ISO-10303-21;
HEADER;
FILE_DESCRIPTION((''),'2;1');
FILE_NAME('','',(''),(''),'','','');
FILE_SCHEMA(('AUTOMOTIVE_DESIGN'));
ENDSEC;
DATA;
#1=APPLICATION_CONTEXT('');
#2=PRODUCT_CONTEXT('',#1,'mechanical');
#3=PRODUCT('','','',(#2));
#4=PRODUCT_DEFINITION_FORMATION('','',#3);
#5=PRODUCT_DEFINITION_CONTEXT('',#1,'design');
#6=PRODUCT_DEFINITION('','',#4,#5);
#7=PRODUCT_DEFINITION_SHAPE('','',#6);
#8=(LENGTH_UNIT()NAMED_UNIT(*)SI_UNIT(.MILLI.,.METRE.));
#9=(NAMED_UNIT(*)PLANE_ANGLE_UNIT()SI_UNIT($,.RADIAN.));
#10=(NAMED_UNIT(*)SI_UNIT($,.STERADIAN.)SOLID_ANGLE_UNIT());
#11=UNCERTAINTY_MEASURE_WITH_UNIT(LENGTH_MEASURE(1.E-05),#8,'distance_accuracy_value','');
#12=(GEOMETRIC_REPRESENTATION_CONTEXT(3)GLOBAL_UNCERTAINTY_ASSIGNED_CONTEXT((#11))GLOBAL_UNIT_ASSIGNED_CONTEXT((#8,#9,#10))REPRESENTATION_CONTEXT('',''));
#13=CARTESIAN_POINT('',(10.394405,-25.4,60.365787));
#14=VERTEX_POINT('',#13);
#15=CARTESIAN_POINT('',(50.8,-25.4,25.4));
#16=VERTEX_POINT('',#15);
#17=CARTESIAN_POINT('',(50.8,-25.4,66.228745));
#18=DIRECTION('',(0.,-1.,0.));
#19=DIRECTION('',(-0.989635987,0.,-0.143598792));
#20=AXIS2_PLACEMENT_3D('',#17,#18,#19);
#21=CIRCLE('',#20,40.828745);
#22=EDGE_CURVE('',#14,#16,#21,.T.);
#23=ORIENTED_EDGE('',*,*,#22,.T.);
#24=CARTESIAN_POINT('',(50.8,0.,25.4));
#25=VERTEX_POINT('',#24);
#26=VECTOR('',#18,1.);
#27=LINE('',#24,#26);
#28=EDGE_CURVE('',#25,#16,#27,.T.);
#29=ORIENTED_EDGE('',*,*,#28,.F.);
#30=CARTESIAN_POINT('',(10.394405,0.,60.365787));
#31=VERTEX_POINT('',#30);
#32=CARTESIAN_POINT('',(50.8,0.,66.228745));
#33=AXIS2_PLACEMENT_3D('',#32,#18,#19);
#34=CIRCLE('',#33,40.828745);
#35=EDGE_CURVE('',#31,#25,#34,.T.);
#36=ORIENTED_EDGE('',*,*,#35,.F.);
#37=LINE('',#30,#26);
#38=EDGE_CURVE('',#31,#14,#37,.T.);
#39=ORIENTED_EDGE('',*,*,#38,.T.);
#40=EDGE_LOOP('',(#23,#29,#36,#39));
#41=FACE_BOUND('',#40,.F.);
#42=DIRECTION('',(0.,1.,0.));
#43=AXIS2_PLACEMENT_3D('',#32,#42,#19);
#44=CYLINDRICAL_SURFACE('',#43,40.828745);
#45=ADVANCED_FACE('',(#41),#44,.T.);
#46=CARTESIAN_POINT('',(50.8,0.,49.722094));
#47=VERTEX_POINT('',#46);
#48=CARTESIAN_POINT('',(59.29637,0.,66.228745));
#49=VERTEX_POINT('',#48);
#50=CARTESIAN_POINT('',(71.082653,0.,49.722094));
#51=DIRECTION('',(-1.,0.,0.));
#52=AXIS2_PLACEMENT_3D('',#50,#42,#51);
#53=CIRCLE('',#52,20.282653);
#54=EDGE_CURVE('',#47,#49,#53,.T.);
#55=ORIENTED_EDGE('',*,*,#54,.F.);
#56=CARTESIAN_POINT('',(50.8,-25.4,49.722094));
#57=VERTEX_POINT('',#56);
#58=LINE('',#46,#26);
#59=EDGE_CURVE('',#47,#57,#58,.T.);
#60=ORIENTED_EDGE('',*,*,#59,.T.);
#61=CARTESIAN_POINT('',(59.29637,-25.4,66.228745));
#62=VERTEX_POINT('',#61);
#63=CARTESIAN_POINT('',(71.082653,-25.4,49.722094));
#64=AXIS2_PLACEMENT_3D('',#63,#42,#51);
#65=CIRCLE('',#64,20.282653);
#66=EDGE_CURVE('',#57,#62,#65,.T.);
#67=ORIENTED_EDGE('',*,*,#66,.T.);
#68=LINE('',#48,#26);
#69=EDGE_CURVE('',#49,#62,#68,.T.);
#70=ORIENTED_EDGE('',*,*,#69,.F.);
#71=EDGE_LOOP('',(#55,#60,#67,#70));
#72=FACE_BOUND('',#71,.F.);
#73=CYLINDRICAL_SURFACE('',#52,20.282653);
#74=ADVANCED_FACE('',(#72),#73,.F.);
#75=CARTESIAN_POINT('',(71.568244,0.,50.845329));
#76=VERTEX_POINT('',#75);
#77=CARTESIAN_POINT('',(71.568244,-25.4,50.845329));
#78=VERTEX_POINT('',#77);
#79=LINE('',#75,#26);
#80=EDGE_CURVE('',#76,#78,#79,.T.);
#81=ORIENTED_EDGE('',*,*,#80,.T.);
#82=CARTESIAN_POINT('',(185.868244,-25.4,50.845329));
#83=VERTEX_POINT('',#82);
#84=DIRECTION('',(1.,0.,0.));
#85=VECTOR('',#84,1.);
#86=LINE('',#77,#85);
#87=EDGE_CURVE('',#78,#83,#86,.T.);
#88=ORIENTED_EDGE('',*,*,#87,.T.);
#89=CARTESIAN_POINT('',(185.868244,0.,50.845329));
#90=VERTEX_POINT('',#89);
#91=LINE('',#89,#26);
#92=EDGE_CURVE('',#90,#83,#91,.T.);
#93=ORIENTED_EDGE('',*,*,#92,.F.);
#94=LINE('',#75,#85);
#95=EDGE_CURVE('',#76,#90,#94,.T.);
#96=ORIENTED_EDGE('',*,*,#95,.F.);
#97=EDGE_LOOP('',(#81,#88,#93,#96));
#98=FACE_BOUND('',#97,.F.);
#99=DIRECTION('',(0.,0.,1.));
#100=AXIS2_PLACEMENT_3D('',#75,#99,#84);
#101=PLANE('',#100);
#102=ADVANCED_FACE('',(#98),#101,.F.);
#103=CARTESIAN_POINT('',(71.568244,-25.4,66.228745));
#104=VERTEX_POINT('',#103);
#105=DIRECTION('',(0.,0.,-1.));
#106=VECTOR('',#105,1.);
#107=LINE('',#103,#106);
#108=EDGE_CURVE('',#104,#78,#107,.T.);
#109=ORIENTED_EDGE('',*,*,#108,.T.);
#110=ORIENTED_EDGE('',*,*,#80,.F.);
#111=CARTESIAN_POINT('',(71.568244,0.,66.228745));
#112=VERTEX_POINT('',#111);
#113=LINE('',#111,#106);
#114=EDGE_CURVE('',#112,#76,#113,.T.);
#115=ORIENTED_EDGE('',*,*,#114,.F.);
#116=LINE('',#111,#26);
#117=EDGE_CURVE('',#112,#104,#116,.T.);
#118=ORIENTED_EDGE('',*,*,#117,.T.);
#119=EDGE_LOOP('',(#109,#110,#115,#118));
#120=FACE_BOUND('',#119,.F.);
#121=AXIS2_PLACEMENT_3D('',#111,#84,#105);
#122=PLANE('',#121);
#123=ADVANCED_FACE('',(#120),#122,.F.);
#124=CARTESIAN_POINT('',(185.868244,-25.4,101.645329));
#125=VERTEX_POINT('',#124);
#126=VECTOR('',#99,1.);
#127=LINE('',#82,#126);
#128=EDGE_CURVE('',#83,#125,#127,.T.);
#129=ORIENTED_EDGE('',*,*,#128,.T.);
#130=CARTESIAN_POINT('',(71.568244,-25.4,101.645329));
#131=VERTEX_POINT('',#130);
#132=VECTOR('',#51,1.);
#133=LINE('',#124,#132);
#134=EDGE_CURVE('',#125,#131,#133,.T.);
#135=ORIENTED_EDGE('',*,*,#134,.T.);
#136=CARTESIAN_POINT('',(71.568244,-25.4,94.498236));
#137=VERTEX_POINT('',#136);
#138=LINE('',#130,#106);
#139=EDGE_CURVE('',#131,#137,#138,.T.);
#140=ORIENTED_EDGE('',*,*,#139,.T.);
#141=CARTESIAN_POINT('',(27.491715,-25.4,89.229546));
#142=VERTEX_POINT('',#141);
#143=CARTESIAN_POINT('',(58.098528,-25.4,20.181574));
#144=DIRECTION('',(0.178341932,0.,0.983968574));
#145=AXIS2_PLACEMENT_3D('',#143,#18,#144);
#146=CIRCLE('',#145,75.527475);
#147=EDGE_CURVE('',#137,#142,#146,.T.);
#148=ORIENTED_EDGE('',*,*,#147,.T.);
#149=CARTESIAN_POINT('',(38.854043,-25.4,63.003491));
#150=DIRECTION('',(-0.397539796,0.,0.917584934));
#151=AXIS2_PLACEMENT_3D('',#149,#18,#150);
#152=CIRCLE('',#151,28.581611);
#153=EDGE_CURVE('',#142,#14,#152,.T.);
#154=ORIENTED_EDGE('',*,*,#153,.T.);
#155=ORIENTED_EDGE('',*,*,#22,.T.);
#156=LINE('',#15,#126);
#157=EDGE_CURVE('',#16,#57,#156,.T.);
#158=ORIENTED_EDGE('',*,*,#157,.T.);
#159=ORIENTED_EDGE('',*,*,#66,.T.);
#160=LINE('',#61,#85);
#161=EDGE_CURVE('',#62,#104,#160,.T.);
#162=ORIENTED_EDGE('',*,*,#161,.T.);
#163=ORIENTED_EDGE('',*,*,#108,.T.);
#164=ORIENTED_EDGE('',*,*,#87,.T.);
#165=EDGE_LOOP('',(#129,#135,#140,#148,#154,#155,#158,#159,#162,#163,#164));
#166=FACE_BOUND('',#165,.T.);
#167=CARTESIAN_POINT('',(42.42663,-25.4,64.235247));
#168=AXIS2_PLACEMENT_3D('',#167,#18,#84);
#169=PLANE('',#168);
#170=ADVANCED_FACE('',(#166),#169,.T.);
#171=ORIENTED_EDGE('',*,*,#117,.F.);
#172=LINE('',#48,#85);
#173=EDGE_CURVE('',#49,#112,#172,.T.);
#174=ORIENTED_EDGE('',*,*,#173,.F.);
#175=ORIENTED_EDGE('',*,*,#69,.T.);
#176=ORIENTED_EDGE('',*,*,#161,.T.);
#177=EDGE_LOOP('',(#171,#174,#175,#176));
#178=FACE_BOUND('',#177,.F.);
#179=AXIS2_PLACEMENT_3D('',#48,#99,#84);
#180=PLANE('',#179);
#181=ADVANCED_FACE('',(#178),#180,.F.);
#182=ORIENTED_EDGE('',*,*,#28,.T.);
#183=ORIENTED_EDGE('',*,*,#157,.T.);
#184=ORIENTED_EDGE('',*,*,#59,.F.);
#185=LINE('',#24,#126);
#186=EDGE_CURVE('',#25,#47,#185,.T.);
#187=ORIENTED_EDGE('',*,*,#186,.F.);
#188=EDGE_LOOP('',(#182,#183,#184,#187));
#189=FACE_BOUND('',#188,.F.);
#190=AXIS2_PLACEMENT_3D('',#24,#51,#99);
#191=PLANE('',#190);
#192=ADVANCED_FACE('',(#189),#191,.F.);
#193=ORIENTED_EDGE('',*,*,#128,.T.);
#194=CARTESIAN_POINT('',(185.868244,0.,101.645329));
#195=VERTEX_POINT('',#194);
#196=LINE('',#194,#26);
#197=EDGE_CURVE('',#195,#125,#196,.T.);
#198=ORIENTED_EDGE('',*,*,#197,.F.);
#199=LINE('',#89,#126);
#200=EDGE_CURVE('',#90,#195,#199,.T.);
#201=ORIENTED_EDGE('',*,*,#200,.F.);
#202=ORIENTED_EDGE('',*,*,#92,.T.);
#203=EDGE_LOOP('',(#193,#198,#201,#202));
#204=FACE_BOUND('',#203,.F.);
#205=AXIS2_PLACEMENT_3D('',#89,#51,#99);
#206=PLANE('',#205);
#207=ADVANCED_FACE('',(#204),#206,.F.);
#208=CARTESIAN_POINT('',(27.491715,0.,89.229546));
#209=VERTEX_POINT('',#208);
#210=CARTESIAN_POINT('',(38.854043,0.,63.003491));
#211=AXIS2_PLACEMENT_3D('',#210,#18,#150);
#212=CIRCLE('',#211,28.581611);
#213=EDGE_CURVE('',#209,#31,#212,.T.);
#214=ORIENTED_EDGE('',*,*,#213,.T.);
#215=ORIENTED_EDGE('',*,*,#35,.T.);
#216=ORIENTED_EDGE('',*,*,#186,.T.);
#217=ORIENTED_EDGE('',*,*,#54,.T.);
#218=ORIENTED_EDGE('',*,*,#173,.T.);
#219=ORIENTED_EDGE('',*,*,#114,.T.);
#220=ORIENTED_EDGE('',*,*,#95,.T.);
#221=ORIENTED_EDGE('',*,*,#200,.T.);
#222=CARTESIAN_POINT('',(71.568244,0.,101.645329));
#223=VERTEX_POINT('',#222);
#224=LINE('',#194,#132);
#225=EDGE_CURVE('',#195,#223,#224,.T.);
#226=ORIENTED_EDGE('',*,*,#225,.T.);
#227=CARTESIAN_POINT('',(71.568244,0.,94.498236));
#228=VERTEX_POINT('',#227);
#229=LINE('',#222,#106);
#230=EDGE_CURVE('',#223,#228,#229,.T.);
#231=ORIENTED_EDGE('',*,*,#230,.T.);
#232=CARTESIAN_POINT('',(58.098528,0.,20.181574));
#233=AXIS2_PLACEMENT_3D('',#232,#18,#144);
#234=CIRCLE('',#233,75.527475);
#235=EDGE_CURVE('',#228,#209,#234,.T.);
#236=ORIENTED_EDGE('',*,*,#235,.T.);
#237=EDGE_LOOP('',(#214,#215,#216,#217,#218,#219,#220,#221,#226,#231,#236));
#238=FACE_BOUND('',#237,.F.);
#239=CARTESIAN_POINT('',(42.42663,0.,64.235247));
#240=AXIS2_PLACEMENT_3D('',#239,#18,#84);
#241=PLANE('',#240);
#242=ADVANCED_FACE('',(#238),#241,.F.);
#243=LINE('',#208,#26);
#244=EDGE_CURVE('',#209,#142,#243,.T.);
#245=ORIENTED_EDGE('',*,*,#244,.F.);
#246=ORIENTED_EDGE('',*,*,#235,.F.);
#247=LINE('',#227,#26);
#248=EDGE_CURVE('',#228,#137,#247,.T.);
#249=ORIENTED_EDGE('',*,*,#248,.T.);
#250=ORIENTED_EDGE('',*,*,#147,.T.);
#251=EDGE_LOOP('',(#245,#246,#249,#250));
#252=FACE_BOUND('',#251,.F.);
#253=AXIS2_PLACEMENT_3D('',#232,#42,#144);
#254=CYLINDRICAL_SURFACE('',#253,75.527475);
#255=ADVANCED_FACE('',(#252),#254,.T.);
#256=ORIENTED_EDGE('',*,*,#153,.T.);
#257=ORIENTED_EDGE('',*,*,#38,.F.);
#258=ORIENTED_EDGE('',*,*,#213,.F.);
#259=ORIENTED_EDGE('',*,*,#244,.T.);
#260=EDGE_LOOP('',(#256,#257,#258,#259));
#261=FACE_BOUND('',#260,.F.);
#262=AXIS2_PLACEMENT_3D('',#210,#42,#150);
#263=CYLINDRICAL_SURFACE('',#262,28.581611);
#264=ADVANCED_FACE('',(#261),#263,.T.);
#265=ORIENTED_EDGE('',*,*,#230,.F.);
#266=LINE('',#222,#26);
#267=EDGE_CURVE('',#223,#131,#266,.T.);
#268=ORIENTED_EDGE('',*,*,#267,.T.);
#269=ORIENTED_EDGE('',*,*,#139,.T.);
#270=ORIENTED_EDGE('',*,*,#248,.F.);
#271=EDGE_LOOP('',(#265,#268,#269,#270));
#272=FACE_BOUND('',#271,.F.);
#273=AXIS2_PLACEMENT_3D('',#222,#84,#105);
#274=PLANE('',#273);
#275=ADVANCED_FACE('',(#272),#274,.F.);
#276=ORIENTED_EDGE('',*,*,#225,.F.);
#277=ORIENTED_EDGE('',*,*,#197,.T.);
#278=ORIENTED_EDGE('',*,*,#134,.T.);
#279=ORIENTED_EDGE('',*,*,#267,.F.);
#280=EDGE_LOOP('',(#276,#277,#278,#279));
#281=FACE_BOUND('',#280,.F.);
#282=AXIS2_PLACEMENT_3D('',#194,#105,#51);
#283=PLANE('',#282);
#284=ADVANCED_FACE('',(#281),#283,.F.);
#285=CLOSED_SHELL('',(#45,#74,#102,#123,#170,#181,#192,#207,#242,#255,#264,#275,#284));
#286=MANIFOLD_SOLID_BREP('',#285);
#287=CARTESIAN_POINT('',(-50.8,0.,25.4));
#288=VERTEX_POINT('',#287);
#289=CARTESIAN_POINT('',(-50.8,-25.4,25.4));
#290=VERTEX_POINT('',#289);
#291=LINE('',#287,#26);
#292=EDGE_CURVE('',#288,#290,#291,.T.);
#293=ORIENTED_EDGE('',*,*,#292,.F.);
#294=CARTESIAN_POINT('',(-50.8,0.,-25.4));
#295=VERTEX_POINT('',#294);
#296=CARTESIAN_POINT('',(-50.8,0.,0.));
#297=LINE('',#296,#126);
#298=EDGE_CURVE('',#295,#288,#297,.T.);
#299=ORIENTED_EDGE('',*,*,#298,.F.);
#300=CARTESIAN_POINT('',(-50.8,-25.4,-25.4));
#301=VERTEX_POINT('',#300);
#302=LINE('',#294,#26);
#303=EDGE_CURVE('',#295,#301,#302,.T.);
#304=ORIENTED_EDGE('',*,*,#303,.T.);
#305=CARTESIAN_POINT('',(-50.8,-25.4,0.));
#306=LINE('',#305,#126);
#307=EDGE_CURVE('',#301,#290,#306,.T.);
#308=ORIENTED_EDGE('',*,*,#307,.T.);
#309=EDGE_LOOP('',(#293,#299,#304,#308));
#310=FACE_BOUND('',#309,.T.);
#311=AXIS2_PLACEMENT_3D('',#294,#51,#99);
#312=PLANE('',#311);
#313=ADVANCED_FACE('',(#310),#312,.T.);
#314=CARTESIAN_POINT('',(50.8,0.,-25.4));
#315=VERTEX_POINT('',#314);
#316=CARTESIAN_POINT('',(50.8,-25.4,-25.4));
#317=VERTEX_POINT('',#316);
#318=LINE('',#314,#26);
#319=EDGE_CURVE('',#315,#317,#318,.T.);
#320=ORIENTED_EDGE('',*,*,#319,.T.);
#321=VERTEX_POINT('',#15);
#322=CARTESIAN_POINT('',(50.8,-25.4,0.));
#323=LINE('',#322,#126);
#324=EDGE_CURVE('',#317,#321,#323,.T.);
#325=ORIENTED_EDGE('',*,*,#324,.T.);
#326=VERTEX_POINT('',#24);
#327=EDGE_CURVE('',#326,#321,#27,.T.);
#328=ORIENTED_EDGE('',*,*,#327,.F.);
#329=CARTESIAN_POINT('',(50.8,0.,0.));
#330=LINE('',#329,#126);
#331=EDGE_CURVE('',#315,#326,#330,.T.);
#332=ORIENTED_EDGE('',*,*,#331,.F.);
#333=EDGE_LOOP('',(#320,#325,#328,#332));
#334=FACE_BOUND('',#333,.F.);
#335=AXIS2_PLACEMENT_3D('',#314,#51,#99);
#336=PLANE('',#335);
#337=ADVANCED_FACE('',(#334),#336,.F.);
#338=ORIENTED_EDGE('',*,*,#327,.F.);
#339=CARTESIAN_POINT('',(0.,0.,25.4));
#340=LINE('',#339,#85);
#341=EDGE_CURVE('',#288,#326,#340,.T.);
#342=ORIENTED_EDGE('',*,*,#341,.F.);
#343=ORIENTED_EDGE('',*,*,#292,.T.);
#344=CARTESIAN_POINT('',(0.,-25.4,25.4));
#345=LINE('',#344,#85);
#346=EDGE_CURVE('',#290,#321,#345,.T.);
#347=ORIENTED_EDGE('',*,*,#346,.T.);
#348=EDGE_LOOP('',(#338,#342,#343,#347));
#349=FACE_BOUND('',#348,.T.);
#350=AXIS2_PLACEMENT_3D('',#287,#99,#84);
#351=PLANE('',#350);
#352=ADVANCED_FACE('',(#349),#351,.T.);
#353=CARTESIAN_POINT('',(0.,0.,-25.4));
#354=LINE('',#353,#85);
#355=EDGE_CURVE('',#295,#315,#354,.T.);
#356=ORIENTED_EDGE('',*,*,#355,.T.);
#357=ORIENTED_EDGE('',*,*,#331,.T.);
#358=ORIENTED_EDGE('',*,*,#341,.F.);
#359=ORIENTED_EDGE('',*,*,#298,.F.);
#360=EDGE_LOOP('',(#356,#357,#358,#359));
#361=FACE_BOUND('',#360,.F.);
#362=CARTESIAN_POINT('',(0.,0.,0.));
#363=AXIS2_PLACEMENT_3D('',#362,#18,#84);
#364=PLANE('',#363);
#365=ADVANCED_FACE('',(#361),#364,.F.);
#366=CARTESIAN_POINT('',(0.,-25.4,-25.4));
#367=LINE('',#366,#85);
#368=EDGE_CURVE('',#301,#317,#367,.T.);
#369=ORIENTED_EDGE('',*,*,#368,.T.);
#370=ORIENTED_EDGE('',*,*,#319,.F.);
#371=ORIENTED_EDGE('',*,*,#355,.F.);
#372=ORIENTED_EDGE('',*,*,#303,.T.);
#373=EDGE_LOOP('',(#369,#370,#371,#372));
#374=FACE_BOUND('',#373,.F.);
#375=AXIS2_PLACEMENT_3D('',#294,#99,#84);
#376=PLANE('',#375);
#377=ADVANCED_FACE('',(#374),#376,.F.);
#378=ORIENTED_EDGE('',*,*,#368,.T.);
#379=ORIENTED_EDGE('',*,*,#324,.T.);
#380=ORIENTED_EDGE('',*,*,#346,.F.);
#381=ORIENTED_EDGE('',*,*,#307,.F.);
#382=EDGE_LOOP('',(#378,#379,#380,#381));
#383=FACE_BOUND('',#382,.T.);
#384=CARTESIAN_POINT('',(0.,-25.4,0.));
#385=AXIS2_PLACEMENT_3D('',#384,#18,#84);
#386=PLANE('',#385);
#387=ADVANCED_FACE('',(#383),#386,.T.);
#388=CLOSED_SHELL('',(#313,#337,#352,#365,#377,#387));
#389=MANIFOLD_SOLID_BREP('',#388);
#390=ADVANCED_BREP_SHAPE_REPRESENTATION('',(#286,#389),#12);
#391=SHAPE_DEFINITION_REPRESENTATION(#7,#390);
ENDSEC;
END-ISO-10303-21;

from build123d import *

# Parameters (mm, degrees)
F1_DEPTH = 25.4
F0_W     = 101.6
F0_H     = 50.8


with BuildPart() as f1:
    # F0 (on Front) → F1 (new body)
    with BuildSketch(Plane.XZ):
        with BuildLine():
            ThreePointArc((10.3944045648, 60.3657866119), (24.082878262, 35.3551021018), (50.8, 25.4))
            Line((50.8, 25.4), (50.8, 38.0313412011))
            Line((50.8, 38.0313412011), (50.8, 49.7220940888))
            ThreePointArc((50.8, 49.7220940888), (53.0487528423, 59.0045752006), (59.2963695526, 66.2287450752))
            Line((59.2963695526, 66.2287450752), (71.5682441892, 66.2287450752))
            Line((71.5682441892, 66.2287450752), (71.5682441892, 94.4982363395))
            ThreePointArc((71.5682441892, 94.4982363395), (49.1341654269, 95.1751720147), (27.4917148054, 89.2295464873))
            ThreePointArc((27.4917148054, 89.2295464873), (14.2628571936, 77.5699621317), (10.3944045648, 60.3657866119))
        make_face()
        with BuildLine():
            ThreePointArc((117.9655272715, 66.2287450752), (97.3968675917, 84.6799466274), (71.5682441892, 94.4982363395))
            Line((71.5682441892, 94.4982363395), (71.5682441892, 66.2287450752))
            Line((71.5682441892, 66.2287450752), (117.9655272715, 66.2287450752))
        make_face()
        with BuildLine():
            Line((71.5682441892, 101.6453287184), (71.5682441892, 94.4982363395))
            ThreePointArc((71.5682441892, 94.4982363395), (97.3968675917, 84.6799466274), (117.9655272715, 66.2287450752))
            Line((117.9655272715, 66.2287450752), (71.5682441892, 66.2287450752))
            Line((71.5682441892, 66.2287450752), (71.5682441892, 50.8453287184))
            Line((71.5682441892, 50.8453287184), (185.8682441892, 50.8453287184))
            Line((185.8682441892, 50.8453287184), (185.8682441892, 101.6453287184))
            Line((185.8682441892, 101.6453287184), (71.5682441892, 101.6453287184))
        make_face()
    extrude(amount=F1_DEPTH)


with BuildPart() as f1b:
    # F0 (on Front) → F1, piece 2 (new body)
    with BuildSketch(Plane.XZ):
        Rectangle(F0_W, F0_H)
    extrude(amount=F1_DEPTH)


solid = Compound([f1.part, f1b.part])
